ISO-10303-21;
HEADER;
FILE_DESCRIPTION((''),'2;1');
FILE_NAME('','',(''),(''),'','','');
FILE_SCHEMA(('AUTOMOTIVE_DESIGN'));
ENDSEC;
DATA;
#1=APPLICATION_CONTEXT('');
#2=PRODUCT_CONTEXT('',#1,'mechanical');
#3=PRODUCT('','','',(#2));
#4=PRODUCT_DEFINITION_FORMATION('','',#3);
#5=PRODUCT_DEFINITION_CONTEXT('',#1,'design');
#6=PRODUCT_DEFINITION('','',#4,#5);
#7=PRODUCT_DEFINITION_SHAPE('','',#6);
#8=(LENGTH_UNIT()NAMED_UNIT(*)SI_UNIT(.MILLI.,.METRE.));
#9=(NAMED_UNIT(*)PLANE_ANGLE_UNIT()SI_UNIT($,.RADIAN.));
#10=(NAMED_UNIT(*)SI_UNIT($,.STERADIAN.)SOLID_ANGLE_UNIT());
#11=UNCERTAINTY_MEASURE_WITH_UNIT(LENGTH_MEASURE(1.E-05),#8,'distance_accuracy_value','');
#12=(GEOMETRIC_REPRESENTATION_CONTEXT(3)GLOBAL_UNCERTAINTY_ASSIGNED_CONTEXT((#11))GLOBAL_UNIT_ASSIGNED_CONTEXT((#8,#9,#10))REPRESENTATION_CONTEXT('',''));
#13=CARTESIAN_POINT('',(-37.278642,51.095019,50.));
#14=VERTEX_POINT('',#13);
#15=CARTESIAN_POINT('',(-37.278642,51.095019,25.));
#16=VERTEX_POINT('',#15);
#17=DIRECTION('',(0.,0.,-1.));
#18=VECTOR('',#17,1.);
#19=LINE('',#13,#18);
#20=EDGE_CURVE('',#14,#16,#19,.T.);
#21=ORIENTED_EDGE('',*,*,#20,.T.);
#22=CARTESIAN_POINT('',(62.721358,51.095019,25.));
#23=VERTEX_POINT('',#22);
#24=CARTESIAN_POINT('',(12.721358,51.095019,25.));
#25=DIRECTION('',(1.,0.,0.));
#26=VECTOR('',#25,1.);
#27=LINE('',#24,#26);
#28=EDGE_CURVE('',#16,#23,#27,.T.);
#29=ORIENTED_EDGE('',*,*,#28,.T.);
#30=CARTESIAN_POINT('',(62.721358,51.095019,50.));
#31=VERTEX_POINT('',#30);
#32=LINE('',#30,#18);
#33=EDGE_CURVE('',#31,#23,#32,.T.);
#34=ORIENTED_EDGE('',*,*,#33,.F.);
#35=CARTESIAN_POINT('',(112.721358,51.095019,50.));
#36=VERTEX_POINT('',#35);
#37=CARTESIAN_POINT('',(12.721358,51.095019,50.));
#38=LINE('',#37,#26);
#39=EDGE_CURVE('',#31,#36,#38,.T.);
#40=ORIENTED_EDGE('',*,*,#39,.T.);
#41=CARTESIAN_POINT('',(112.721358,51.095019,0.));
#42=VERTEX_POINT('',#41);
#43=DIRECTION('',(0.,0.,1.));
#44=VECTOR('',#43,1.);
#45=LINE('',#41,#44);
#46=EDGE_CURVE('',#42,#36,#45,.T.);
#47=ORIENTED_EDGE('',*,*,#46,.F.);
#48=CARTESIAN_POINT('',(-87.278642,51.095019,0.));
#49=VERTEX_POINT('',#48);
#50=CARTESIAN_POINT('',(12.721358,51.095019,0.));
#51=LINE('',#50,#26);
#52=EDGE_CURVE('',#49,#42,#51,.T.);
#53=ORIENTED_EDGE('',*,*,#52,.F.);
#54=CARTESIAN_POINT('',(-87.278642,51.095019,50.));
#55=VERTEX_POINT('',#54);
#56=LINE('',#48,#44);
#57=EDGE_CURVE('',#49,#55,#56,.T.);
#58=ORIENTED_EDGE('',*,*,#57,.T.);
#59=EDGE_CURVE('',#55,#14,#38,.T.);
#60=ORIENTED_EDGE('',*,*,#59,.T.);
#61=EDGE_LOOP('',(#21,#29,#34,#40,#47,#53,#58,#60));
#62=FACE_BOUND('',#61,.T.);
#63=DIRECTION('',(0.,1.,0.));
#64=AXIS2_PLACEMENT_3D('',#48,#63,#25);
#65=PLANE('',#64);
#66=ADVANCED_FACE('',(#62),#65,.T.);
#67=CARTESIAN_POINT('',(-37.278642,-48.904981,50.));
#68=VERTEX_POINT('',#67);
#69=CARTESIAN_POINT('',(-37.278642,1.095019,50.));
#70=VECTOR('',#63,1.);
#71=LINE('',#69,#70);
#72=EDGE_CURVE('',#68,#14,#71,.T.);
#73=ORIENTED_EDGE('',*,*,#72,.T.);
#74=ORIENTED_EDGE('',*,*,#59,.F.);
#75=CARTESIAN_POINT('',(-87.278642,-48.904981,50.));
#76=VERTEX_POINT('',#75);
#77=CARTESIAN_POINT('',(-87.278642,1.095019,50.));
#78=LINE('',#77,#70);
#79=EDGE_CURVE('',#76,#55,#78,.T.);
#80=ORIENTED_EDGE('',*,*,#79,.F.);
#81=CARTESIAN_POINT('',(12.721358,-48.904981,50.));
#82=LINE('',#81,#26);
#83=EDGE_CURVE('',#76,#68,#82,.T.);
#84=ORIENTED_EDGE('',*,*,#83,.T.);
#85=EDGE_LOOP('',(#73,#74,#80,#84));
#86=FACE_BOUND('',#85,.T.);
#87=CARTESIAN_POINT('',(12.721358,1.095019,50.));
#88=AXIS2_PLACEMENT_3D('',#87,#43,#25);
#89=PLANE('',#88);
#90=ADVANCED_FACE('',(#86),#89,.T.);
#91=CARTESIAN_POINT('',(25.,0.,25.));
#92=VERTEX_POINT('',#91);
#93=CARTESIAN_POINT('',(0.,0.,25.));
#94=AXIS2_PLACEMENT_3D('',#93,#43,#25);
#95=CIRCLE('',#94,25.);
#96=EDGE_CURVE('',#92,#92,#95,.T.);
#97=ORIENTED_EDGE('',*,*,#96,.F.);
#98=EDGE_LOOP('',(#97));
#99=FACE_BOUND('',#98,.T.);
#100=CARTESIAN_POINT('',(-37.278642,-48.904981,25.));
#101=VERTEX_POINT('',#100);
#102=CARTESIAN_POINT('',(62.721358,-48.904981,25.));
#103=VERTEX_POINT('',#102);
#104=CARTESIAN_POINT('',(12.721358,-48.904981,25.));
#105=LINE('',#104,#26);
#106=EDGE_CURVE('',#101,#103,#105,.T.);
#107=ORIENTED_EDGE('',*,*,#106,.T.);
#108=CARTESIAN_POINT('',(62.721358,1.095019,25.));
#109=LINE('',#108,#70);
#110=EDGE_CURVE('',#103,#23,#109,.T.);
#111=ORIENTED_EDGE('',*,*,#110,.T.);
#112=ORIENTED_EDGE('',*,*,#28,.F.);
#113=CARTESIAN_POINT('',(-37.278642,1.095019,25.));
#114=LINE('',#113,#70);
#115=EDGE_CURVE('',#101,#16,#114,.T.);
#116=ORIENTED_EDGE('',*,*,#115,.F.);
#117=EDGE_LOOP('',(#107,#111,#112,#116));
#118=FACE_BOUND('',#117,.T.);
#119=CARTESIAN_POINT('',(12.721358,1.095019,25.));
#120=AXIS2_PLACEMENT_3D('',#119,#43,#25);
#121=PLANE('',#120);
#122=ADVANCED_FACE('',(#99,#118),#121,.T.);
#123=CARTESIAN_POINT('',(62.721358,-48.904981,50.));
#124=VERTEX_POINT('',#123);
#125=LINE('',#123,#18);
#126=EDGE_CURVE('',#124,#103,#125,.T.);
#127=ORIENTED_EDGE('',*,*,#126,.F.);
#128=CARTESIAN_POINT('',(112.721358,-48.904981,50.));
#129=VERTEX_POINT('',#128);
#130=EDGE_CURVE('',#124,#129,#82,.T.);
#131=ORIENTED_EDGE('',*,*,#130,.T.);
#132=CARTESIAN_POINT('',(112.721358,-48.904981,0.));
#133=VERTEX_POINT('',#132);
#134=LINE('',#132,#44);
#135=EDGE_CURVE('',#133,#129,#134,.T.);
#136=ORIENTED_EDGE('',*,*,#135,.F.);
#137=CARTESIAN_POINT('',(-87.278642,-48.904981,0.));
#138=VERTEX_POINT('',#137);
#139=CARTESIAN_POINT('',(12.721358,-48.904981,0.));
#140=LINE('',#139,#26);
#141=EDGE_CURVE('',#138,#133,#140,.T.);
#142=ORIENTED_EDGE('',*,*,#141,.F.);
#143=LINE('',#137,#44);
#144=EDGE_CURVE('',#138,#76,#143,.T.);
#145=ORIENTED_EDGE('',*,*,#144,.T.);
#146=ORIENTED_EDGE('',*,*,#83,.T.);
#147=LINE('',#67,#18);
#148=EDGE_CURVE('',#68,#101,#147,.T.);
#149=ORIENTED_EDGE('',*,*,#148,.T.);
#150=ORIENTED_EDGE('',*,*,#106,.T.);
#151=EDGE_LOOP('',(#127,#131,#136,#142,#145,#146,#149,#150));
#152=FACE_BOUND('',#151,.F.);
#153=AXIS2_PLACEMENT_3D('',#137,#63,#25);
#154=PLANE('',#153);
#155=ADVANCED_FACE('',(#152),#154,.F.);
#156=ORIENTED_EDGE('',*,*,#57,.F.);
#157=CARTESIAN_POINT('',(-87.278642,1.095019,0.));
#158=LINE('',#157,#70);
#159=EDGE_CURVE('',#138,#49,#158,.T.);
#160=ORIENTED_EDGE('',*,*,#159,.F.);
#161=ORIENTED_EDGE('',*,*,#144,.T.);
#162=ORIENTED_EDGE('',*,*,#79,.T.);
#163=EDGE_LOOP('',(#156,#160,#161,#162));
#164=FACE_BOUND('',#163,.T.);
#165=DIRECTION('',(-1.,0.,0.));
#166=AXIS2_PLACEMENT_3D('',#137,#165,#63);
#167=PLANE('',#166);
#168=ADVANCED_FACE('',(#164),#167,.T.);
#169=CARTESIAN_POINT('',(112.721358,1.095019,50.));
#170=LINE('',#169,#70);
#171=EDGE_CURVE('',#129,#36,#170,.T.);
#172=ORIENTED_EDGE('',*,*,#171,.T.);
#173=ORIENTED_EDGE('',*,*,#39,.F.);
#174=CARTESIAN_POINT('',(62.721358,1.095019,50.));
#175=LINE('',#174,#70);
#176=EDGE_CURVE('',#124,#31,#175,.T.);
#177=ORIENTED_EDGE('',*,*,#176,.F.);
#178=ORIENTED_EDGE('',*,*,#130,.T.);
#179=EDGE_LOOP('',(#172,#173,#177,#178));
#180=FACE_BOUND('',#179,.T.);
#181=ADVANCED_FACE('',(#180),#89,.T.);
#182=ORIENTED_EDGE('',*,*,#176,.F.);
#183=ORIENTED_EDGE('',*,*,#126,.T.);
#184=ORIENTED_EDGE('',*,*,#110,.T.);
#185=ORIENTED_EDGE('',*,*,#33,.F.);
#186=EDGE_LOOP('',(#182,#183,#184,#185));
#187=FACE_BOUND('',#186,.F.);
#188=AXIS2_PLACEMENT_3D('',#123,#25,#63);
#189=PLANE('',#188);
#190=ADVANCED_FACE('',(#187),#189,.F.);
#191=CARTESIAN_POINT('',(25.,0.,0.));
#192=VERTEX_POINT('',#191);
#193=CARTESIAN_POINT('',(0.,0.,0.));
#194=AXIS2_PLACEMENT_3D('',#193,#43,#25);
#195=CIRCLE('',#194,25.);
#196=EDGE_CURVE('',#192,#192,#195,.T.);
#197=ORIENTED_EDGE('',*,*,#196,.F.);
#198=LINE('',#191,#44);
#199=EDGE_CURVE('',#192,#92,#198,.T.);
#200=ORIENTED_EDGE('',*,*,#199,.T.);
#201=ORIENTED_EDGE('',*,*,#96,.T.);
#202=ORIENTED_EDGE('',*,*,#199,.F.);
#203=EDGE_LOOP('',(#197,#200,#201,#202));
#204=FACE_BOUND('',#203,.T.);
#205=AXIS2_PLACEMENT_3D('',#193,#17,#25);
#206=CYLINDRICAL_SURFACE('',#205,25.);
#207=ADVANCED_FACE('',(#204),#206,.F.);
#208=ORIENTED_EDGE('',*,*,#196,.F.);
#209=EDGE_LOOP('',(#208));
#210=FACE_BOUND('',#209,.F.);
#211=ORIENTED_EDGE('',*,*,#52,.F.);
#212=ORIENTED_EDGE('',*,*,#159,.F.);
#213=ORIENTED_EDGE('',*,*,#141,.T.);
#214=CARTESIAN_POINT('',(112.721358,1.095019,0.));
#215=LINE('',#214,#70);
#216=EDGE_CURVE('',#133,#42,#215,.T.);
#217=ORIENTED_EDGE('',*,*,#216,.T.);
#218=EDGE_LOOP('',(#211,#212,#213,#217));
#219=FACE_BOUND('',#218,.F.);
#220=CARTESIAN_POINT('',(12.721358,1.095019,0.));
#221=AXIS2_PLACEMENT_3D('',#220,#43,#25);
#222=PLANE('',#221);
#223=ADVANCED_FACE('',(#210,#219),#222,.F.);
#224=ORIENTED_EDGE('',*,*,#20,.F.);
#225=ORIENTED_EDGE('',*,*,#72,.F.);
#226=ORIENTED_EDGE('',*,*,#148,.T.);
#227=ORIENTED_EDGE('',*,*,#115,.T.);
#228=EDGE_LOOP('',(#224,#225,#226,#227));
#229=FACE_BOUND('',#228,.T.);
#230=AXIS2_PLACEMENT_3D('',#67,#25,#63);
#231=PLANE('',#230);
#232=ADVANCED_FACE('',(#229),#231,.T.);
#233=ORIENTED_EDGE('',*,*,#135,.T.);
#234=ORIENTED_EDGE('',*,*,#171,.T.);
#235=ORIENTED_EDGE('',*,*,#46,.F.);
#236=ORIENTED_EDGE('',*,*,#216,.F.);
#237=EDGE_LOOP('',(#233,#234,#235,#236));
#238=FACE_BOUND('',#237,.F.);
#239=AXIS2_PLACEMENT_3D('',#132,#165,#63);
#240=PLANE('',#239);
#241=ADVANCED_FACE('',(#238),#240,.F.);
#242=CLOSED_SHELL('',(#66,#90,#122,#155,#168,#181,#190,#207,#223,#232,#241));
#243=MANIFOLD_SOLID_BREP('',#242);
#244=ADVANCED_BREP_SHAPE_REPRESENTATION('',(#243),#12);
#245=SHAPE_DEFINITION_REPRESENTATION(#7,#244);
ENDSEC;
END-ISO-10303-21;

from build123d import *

# Parameters (mm, degrees)
F0_W     = 200
F0_H     = 100
F0_R     = 25
F1_DEPTH = 50
F2_W     = 100
F2_H     = 100
F2_R     = 25
F3_DEPTH = 25


# Not quite as in the source:
# - a feature names something its author has since deleted; it is built from what else it names


with BuildPart() as f1:
    # F0 (on Top) → F1 (new body)
    with BuildSketch(Plane.XY):
        with Locations((12.7213582092, 1.0950192809)):
            Rectangle(F0_W, F0_H)
        Circle(F0_R, mode=Mode.SUBTRACT)
    extrude(amount=F1_DEPTH)

    # F2 (on face) → F3 (cut)
    with BuildSketch(Plane.XY.offset(50)):
        with Locations((12.7213582092, 1.0950192809)):
            Rectangle(F2_W, F2_H)
        Circle(F2_R, mode=Mode.SUBTRACT)
    extrude(amount=-F3_DEPTH, mode=Mode.SUBTRACT)


solid = f1.part
